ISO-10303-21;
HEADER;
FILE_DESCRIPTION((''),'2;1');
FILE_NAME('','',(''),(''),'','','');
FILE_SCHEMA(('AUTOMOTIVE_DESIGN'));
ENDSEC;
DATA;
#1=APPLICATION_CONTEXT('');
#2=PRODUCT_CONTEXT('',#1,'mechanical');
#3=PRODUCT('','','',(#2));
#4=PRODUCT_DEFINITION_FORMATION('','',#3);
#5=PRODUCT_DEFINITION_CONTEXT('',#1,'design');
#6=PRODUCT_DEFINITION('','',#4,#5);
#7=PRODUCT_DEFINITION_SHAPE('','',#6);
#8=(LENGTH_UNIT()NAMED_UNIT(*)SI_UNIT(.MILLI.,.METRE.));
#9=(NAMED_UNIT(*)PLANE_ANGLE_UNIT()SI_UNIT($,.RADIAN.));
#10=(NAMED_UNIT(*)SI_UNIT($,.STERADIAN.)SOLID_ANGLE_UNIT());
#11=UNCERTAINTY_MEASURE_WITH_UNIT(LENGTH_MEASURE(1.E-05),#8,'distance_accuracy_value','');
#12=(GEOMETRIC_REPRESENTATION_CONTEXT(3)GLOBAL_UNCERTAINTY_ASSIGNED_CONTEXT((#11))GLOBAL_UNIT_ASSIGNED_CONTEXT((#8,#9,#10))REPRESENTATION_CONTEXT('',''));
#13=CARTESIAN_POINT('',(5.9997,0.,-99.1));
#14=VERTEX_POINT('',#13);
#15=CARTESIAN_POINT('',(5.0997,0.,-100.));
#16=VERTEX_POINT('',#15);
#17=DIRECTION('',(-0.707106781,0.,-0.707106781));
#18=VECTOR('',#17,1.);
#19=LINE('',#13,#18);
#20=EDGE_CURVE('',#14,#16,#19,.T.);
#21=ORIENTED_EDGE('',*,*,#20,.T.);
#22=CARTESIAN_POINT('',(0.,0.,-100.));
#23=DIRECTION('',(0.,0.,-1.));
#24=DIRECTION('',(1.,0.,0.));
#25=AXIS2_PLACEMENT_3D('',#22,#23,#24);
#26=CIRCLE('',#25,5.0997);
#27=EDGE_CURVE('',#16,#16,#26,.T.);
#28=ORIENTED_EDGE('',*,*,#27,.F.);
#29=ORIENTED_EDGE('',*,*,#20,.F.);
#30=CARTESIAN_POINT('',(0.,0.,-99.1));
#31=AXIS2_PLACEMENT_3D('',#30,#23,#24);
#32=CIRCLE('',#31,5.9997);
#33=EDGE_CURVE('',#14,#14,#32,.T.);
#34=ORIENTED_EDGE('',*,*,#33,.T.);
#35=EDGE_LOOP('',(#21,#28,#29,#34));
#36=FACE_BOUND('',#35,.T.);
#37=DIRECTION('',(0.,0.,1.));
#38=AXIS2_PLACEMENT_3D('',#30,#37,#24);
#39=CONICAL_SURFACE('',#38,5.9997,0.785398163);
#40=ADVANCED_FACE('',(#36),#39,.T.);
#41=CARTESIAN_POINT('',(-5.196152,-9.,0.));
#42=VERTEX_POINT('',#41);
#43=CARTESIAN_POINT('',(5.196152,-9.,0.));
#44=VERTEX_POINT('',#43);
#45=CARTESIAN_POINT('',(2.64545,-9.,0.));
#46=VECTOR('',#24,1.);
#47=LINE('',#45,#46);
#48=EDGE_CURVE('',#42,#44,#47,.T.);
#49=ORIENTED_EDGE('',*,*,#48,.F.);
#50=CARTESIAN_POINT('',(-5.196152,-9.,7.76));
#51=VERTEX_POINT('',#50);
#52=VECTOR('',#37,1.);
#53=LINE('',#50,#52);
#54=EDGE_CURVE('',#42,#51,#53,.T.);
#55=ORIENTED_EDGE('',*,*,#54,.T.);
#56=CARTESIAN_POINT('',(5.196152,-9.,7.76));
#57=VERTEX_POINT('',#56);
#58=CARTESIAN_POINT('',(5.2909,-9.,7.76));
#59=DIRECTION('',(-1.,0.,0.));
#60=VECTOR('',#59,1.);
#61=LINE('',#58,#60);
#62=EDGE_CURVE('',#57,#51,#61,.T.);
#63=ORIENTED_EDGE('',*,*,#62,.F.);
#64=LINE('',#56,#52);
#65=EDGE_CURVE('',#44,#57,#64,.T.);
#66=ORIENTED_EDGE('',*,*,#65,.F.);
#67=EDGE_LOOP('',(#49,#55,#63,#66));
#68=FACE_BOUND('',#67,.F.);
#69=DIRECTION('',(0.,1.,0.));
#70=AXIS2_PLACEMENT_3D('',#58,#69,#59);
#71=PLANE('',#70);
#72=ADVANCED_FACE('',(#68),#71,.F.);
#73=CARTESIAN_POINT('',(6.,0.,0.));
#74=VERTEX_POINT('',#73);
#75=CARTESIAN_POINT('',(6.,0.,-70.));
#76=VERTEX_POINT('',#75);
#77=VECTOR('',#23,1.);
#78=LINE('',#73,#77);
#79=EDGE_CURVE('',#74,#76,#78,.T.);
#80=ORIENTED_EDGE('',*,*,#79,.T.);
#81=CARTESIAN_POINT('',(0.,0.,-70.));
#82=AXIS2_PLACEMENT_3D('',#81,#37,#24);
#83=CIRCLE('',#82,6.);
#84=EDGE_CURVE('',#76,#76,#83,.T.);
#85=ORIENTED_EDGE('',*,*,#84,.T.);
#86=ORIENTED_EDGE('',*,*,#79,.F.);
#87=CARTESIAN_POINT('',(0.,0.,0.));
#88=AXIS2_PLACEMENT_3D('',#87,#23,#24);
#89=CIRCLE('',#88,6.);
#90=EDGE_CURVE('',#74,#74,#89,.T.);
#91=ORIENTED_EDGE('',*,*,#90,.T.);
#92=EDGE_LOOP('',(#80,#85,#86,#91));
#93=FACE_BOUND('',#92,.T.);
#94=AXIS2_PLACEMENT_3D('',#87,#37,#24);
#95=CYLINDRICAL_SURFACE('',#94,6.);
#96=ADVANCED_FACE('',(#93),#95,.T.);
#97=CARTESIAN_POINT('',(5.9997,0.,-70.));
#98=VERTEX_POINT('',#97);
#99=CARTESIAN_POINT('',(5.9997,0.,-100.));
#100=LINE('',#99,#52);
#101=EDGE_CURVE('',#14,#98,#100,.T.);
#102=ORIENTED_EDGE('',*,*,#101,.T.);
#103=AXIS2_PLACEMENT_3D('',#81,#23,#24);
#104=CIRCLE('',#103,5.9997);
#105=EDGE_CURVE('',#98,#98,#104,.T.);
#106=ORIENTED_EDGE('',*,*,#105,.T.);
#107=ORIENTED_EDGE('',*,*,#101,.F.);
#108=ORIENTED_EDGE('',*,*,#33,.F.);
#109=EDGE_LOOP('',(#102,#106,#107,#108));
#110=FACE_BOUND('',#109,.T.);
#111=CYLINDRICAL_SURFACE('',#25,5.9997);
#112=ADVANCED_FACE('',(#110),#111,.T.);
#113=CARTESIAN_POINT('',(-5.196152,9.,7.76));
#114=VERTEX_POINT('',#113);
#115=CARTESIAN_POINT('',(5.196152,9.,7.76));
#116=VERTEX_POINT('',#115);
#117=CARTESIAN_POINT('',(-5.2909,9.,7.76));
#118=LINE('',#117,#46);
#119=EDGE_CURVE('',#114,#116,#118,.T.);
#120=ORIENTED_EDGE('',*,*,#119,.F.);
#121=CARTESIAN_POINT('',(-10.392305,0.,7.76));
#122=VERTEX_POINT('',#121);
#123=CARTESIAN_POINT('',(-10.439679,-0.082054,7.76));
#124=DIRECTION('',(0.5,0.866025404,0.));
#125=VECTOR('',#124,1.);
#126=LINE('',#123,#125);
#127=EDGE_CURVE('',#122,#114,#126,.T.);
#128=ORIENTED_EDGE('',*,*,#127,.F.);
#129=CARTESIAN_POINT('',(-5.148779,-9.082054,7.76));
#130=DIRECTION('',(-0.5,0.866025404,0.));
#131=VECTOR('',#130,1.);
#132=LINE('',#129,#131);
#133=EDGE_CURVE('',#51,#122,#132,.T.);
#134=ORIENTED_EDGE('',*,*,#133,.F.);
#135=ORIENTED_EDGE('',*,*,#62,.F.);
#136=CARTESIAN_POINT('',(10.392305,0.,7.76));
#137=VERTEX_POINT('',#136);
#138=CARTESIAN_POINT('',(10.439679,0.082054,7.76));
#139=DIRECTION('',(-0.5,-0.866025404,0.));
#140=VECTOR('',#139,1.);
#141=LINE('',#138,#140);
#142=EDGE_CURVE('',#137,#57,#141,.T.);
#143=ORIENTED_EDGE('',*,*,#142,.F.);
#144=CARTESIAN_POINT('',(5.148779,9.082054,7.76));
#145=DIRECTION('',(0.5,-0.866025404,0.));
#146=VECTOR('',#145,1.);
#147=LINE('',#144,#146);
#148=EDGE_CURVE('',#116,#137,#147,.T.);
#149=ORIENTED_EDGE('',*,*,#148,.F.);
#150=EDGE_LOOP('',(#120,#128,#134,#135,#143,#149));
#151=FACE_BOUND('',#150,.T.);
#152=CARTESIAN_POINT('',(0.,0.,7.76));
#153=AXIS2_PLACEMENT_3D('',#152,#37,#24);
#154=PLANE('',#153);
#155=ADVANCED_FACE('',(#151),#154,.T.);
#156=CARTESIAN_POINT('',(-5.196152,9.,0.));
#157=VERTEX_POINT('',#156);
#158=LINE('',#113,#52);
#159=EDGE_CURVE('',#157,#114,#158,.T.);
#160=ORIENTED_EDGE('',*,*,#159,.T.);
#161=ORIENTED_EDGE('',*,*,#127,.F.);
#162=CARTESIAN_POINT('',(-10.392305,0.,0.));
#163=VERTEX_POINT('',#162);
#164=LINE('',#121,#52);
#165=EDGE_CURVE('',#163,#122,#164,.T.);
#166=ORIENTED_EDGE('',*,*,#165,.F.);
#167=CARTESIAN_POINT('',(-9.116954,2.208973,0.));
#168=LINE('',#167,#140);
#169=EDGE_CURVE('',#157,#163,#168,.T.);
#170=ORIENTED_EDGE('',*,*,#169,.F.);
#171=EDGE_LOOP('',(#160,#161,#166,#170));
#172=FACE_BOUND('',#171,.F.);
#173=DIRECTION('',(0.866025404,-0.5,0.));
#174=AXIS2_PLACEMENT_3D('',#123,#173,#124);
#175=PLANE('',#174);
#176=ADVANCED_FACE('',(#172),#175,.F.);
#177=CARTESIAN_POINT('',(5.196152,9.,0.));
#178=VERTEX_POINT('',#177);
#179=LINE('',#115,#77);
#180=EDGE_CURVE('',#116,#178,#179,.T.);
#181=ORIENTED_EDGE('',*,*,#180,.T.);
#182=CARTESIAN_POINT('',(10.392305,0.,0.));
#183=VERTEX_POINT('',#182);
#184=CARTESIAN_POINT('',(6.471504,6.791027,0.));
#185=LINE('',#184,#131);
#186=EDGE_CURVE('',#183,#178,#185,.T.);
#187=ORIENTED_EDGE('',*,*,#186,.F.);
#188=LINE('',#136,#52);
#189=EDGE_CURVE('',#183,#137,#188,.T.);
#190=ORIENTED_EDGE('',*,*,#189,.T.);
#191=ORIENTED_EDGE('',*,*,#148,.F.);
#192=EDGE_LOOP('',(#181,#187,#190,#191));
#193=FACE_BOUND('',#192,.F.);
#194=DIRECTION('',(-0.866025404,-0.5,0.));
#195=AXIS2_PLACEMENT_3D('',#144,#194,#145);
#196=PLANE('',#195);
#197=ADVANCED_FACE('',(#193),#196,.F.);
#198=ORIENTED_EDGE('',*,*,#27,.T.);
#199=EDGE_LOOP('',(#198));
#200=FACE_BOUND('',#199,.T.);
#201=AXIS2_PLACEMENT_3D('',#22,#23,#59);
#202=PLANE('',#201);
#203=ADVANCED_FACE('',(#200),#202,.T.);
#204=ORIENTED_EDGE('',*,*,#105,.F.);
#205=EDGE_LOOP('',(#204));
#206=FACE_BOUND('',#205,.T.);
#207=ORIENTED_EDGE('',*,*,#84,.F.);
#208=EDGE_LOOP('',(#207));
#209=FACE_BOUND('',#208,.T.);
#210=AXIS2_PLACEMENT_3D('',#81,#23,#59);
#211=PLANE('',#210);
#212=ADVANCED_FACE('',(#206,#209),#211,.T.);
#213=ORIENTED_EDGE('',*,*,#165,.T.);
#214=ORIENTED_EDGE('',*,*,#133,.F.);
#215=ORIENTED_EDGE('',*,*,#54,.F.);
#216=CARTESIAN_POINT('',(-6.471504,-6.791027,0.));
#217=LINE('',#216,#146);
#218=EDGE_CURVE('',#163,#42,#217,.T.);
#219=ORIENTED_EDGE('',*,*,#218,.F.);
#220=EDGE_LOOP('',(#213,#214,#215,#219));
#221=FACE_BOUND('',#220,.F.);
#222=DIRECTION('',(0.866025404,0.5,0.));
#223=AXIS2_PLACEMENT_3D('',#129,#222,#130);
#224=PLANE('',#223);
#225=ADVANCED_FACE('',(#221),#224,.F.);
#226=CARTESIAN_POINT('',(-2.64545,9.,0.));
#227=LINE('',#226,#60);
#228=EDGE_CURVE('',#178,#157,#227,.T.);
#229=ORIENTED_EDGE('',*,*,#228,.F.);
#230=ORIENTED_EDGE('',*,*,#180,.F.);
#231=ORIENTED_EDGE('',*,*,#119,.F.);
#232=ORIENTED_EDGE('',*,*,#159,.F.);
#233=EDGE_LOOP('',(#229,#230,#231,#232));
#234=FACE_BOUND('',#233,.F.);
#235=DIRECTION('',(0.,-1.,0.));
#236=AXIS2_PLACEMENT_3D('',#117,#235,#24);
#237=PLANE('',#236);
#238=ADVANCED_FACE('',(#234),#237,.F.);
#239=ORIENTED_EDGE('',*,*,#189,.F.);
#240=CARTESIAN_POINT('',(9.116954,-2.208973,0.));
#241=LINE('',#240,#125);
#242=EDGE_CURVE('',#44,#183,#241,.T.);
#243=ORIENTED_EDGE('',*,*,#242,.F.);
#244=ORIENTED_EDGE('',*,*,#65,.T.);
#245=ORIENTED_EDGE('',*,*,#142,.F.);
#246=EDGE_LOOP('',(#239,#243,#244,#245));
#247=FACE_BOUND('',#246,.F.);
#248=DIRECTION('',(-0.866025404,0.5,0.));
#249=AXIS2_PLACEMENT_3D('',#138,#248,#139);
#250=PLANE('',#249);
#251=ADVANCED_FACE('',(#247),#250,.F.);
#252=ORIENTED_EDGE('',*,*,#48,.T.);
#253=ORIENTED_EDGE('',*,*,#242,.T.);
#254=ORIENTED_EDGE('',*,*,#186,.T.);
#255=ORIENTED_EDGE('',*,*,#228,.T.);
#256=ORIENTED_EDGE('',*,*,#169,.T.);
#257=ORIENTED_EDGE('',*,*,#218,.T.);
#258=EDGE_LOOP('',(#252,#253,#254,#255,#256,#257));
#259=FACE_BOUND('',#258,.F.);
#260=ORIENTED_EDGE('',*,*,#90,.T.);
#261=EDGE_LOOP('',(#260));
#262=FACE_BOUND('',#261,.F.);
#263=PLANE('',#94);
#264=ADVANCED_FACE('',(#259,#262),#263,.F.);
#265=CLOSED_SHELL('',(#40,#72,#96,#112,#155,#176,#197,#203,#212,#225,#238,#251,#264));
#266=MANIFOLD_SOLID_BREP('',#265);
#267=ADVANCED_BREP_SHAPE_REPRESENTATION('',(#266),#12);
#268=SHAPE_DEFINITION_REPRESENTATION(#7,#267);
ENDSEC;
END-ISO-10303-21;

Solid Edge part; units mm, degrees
sketch "Sketch1" plane through (0, 0, 0) normal (0, 0, 1) x (1, 0, 0)
  circle A0 centre (0, 0) radius 10.44
  dimension "D1" = 20.88
extrude "Protrusion1" add sketch "Sketch1" along normal blind 7.76
sketch "Sketch2" plane through (0, 0, 0) normal (0, 0, -1) x (1, 0, 0)
  circle A0 centre (0, 0) radius 6
extrude "Protrusion2" add sketch "Sketch2" along normal blind 100
sketch "Sketch3" plane through (0, 0, -100) normal (0, 0, -1) x (1, 0, 0)
  circle A0 centre (0, 0) radius 5.9997
extrude "Cutout1" cut sketch "Sketch3" against normal blind 30 flip side to cut
chamfer "Chamfer_1" distance 0.9 angle 45 1 edges at (-5.9997, 0, -100)
sketch "Sketch4" plane through (0, 0, 7.76) normal (0, 0, 1) x (1, 0, 0)
  line L0 (-5.2909, 9) -> (5.2909, 9)
  dimension "D1" = 18
extrude "Cutout2" cut sketch "Sketch4" against normal up to next material side at (0, 9.05, 7.76)
pattern_circular "Pattern1" count 6 over 360 about axis through (0, 0, 7.76) along (0, 0, 1) of "Cutout2"
properties part number "24104321"
